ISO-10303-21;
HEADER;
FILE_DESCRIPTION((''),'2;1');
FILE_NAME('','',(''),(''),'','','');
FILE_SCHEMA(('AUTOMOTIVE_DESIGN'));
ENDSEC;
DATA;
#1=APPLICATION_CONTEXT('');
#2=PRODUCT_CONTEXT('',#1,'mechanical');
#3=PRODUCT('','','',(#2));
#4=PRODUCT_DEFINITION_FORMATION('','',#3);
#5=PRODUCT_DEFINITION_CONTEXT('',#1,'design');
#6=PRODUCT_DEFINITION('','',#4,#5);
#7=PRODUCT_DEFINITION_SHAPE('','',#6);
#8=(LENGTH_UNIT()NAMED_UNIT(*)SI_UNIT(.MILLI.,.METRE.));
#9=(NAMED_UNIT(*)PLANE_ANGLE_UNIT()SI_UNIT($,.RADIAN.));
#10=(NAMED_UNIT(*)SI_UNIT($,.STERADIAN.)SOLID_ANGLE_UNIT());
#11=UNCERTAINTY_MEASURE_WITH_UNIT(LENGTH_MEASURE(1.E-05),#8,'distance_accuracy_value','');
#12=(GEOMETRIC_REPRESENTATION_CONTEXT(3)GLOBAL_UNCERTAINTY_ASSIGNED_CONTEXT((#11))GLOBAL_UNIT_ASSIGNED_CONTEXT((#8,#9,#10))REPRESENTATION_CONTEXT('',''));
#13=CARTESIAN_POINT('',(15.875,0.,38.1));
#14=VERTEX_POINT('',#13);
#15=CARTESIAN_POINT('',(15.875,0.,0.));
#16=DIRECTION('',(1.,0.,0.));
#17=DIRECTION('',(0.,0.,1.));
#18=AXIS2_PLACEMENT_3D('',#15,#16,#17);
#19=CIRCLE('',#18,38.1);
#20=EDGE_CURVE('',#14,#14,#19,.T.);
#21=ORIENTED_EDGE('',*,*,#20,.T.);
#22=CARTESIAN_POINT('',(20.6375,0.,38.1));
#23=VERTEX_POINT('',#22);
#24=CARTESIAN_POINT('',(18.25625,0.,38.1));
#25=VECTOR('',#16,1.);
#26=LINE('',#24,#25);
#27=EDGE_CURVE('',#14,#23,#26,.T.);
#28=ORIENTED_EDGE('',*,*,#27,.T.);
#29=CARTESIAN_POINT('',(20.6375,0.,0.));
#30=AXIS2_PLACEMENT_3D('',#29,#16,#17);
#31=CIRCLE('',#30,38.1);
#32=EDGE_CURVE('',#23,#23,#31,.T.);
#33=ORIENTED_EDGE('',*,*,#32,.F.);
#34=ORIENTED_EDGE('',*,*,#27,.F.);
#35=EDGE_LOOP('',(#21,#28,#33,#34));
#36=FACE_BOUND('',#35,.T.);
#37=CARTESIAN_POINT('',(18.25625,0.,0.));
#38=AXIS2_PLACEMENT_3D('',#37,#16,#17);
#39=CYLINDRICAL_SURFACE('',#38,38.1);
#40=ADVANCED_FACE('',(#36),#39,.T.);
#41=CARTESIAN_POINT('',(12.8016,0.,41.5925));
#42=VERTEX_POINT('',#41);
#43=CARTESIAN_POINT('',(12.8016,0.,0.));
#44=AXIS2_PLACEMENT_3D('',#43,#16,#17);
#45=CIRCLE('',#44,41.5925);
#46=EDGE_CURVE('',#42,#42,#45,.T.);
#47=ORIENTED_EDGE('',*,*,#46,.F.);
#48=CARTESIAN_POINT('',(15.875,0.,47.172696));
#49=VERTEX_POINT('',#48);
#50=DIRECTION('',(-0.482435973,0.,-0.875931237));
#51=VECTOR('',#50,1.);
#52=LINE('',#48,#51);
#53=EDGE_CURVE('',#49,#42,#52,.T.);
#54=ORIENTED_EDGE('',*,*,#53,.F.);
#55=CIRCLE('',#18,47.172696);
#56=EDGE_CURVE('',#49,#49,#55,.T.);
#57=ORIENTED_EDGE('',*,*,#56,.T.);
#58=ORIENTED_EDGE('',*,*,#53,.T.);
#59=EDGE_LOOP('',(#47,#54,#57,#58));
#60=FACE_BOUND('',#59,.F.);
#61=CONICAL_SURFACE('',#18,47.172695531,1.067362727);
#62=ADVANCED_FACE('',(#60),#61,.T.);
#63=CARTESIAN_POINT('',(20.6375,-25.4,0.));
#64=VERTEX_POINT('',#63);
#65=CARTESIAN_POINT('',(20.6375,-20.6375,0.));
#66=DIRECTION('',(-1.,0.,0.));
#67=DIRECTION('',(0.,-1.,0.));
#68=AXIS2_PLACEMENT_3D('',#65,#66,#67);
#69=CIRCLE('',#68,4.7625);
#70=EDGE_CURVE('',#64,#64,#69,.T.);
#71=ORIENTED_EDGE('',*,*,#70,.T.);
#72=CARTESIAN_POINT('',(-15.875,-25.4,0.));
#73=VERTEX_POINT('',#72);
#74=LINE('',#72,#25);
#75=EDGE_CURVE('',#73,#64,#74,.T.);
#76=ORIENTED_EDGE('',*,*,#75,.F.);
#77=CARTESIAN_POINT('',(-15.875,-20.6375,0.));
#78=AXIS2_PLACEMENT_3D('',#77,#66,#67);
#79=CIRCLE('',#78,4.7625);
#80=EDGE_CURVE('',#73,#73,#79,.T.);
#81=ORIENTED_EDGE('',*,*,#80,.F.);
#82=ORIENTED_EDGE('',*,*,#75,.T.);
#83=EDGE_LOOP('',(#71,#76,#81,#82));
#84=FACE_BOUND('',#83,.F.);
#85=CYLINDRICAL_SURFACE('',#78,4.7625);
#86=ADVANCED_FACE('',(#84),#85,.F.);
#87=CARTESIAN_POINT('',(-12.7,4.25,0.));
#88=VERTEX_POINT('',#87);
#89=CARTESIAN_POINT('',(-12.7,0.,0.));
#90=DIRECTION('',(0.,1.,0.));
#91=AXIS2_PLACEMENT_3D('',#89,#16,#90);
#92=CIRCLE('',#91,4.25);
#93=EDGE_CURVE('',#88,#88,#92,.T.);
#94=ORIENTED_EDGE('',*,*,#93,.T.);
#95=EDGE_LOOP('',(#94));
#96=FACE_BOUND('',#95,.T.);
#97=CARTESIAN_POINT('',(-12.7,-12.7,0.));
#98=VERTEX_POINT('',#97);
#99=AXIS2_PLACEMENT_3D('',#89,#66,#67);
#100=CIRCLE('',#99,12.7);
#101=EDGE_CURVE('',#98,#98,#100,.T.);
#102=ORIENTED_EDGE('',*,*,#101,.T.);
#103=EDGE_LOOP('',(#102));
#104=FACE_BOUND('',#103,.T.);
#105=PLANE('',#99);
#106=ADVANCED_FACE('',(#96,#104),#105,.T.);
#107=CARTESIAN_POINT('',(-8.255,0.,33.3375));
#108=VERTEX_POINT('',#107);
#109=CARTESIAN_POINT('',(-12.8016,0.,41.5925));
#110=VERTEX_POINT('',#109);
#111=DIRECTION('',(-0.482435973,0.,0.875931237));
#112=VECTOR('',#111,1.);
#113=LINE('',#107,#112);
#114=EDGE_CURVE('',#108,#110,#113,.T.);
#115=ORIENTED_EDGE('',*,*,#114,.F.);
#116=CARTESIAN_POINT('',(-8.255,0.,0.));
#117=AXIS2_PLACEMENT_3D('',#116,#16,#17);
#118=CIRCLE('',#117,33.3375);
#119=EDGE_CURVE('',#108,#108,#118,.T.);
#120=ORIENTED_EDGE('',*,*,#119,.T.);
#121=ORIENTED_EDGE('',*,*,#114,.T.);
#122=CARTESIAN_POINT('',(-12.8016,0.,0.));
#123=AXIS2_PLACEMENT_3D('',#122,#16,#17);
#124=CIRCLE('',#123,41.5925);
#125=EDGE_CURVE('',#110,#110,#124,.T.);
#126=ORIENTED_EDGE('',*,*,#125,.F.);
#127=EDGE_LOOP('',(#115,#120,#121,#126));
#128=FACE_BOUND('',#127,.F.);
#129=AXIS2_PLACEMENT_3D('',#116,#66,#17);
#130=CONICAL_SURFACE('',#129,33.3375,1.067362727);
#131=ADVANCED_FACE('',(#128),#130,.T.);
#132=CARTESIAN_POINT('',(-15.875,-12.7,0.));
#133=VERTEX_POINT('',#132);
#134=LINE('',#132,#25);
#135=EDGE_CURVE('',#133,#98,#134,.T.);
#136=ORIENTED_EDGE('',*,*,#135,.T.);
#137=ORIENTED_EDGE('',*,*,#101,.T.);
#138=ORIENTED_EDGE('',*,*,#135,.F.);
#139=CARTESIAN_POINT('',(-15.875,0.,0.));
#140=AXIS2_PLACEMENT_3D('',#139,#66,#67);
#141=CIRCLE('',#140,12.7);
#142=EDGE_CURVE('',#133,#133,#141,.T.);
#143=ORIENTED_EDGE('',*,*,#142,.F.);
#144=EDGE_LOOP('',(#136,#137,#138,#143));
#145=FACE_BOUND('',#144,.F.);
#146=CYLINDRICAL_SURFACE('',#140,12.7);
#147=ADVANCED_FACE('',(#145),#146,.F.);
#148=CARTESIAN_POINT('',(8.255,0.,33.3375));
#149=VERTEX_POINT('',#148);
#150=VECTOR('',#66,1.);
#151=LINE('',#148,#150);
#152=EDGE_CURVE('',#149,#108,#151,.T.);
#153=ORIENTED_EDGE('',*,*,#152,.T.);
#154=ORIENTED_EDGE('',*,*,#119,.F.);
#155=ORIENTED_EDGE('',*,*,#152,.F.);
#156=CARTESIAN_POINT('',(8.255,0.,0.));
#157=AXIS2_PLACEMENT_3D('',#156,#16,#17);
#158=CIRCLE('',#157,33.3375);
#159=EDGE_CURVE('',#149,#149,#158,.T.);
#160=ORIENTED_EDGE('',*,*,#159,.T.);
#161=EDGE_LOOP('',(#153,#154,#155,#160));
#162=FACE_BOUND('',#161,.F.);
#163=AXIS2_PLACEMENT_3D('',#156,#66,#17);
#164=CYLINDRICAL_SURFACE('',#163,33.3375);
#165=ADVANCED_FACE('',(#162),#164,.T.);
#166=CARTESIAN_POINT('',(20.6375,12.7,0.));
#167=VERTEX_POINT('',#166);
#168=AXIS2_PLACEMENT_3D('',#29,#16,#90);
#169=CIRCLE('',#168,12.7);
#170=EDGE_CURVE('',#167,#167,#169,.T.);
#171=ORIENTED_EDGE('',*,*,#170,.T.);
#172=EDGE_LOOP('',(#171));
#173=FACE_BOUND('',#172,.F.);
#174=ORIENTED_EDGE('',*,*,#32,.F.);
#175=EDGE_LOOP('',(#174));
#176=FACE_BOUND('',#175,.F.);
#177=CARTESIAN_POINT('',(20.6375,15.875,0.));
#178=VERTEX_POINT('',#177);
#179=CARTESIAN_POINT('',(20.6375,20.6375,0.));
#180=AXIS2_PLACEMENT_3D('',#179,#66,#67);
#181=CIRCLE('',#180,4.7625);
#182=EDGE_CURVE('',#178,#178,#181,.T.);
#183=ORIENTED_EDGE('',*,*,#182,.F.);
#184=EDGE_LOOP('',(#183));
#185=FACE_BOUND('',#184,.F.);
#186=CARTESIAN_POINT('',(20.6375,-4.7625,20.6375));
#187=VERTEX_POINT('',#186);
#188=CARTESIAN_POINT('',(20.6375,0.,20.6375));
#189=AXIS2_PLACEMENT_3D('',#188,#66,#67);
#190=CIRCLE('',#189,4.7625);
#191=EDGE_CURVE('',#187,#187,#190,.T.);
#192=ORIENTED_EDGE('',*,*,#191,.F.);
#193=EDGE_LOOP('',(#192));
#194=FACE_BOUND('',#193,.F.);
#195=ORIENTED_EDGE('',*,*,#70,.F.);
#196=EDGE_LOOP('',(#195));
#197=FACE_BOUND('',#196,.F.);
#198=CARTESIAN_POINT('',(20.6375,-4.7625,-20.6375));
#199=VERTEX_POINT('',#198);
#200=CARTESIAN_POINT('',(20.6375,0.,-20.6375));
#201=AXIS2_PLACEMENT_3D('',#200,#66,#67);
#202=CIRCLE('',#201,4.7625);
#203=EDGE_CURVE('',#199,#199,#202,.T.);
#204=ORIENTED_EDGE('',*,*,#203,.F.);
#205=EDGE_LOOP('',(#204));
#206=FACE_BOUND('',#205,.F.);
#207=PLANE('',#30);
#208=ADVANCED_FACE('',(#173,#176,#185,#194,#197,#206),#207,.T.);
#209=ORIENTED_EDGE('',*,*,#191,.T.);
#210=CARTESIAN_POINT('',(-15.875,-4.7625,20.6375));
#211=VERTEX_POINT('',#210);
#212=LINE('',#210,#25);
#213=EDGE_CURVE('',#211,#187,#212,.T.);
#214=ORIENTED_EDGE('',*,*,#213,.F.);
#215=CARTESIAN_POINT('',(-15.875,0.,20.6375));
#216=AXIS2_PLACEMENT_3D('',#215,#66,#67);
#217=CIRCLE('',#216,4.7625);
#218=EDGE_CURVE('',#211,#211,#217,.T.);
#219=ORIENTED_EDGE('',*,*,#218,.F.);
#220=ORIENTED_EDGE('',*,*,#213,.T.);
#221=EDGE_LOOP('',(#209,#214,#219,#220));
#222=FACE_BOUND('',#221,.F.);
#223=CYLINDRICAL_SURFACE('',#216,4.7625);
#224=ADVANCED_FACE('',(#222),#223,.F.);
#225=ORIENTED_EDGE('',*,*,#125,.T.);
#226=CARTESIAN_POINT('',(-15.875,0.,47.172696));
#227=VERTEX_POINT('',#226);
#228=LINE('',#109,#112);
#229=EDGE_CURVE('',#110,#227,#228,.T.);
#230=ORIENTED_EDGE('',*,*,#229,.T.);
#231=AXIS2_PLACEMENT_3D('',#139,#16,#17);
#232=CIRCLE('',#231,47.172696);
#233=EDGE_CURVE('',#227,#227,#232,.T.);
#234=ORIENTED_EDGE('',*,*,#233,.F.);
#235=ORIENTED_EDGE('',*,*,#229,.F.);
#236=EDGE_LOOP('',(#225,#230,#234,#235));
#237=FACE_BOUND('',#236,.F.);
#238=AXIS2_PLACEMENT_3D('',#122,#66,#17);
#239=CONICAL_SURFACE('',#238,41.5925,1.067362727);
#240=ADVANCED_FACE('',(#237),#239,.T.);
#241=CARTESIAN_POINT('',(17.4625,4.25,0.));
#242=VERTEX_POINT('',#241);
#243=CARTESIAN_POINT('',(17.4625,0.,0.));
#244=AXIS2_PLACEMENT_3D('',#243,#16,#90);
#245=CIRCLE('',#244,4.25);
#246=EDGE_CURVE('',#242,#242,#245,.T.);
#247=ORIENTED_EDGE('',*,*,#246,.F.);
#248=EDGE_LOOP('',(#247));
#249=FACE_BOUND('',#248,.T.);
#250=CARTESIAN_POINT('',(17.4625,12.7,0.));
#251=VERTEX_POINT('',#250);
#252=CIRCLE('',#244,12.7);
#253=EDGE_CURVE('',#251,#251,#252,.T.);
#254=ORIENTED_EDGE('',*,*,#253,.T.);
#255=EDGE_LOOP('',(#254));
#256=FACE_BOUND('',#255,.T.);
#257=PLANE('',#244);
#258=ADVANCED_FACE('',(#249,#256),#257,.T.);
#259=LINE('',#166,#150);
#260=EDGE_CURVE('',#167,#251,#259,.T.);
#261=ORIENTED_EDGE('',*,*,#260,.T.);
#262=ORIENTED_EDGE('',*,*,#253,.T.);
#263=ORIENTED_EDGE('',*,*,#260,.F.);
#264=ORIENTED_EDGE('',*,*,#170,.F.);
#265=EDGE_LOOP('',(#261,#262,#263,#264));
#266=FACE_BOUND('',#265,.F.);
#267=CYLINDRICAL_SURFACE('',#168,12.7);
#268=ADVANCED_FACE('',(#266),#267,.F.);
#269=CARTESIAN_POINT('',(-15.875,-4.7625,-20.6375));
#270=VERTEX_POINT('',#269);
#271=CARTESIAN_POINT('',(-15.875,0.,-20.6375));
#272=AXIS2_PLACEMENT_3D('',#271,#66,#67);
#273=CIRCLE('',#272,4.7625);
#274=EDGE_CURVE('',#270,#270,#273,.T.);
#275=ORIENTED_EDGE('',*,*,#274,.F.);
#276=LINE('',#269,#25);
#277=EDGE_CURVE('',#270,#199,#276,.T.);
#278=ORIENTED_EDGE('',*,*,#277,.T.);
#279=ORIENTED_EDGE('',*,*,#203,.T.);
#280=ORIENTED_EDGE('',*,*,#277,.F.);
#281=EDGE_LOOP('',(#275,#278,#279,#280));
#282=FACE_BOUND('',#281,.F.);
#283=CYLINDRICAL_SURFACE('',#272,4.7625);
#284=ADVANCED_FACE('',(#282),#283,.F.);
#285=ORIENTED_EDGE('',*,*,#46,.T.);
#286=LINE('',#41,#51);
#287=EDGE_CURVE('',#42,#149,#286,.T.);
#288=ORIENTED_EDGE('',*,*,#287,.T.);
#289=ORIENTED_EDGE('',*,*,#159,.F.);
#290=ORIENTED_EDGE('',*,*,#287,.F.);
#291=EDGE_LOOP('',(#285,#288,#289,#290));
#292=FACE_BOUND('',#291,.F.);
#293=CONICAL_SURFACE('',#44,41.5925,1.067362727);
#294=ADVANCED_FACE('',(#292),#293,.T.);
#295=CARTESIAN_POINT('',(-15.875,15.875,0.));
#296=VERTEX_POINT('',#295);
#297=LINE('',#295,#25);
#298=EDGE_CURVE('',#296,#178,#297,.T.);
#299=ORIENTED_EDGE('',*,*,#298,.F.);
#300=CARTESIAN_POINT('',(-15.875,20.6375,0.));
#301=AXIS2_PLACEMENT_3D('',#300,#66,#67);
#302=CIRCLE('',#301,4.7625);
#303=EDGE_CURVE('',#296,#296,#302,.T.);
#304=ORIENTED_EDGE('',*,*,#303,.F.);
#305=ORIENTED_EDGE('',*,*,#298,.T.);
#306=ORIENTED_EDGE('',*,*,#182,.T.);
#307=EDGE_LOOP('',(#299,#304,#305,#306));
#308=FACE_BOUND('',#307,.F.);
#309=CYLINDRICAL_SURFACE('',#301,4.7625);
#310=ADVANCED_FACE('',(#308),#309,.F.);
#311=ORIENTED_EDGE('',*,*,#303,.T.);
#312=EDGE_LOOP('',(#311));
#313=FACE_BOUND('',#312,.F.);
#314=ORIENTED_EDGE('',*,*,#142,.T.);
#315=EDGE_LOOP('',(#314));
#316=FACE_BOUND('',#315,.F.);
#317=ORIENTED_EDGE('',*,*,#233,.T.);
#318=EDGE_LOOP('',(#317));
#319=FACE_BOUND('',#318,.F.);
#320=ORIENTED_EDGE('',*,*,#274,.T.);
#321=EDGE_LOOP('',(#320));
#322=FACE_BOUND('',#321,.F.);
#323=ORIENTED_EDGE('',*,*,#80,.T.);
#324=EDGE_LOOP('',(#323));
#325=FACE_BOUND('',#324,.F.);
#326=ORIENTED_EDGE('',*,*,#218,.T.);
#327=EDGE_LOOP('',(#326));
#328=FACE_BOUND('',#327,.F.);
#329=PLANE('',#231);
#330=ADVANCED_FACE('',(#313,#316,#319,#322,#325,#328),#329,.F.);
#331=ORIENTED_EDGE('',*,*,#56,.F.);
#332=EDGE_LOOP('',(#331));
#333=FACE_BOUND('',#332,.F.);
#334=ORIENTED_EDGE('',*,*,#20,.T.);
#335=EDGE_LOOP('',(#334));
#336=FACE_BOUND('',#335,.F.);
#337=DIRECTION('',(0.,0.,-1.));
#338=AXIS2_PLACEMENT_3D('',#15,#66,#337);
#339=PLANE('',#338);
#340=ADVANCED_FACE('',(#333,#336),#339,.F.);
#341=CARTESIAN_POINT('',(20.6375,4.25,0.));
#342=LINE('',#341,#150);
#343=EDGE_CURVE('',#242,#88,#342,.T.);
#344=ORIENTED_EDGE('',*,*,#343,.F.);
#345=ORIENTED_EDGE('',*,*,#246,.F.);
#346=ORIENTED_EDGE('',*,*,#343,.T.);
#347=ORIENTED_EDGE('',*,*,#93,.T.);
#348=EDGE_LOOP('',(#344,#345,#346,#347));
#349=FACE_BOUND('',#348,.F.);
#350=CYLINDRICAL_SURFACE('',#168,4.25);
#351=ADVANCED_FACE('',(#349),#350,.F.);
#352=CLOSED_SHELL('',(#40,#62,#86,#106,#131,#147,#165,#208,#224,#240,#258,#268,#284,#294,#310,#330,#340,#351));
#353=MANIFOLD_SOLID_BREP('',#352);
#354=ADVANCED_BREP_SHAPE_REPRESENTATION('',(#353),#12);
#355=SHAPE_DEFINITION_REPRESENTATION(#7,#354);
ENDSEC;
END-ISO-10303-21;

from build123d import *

# Parameters (mm, degrees)
F0_W     = 4.7625
F0_H     = 38.1
F2_R     = 4.25
F3_DEPTH = 36.5135
F2_R_2   = 12.7
F4_DEPTH = 3.175
F5_R     = 12.7
F5_R_2   = 4.25
F6_DEPTH = 3.175
F5_R_3   = 4.7625
F7_DEPTH = 36.5135


with BuildPart() as f1:
    # F0 (on Front) → F1 (revolve)
    with BuildSketch(Plane.XZ):
        with BuildLine():
            Line((-12.8016, 41.5925), (-15.875, 41.5925))
            Line((-15.875, 41.5925), (-15.875, 0))
            Line((-15.875, 0), (-4.7625, 0))
            ThreePointArc((-4.7625, 0), (0, 4.7625), (4.7625, 0))
            Line((4.7625, 0), (15.875, 0))
            Line((15.875, 0), (15.875, 38.1))
            Line((15.875, 38.1), (15.875, 41.5925))
            Line((15.875, 41.5925), (12.8016, 41.5925))
            Line((12.8016, 41.5925), (8.255, 33.3375))
            Line((8.255, 33.3375), (-8.255, 33.3375))
            Line((-8.255, 33.3375), (-12.8016, 41.5925))
        make_face()
        with Locations((18.25625, 19.05)):
            Rectangle(F0_W, F0_H)
        with BuildLine():
            ThreePointArc((4.7625, 0), (0, 4.7625), (-4.7625, 0))
            Line((-4.7625, 0), (4.7625, 0))
        make_face()
        Polygon((-15.875, 47.1726955307), (-15.875, 41.5925), (-12.8016, 41.5925), align=None)
        Polygon((15.875, 47.1726955307), (12.8016, 41.5925), (15.875, 41.5925), align=None)
    revolve(axis=Axis((2.38125, 0, 0), (1, 0, 0)))

    # F2 (on face) → F3 (cut, through all)
    with BuildSketch(Plane.YZ.offset(20.6375)):
        Circle(F2_R)
    extrude(amount=-F3_DEPTH, mode=Mode.SUBTRACT)

    # F2 (on face) → F4 (cut)
    with BuildSketch(Plane.YZ.offset(20.6375)):
        Circle(F2_R_2)
        Circle(F2_R, mode=Mode.SUBTRACT)
    extrude(amount=-F4_DEPTH, mode=Mode.SUBTRACT)

    # F5 (on face) → F6 (cut)
    with BuildSketch(Plane(origin=(-15.875, 0, 0), x_dir=(0, -1, 0), z_dir=(-1, 0, 0))):
        Circle(F5_R)
        Circle(F5_R_2, mode=Mode.SUBTRACT)
        Circle(F5_R_2)
    extrude(amount=-F6_DEPTH, mode=Mode.SUBTRACT)

    # F5 (on face) → F7 (cut, through all)
    with BuildSketch(Plane(origin=(-15.875, 0, 0), x_dir=(0, -1, 0), z_dir=(-1, 0, 0))):
        with Locations((0, 20.6375)):
            Circle(F5_R_3)
        with Locations((20.6375, 0)):
            Circle(F5_R_3)
        with Locations((0, -20.6375)):
            Circle(F5_R_3)
        with Locations((-20.6375, 0)):
            Circle(F5_R_3)
    extrude(amount=-F7_DEPTH, mode=Mode.SUBTRACT)


solid = f1.part
